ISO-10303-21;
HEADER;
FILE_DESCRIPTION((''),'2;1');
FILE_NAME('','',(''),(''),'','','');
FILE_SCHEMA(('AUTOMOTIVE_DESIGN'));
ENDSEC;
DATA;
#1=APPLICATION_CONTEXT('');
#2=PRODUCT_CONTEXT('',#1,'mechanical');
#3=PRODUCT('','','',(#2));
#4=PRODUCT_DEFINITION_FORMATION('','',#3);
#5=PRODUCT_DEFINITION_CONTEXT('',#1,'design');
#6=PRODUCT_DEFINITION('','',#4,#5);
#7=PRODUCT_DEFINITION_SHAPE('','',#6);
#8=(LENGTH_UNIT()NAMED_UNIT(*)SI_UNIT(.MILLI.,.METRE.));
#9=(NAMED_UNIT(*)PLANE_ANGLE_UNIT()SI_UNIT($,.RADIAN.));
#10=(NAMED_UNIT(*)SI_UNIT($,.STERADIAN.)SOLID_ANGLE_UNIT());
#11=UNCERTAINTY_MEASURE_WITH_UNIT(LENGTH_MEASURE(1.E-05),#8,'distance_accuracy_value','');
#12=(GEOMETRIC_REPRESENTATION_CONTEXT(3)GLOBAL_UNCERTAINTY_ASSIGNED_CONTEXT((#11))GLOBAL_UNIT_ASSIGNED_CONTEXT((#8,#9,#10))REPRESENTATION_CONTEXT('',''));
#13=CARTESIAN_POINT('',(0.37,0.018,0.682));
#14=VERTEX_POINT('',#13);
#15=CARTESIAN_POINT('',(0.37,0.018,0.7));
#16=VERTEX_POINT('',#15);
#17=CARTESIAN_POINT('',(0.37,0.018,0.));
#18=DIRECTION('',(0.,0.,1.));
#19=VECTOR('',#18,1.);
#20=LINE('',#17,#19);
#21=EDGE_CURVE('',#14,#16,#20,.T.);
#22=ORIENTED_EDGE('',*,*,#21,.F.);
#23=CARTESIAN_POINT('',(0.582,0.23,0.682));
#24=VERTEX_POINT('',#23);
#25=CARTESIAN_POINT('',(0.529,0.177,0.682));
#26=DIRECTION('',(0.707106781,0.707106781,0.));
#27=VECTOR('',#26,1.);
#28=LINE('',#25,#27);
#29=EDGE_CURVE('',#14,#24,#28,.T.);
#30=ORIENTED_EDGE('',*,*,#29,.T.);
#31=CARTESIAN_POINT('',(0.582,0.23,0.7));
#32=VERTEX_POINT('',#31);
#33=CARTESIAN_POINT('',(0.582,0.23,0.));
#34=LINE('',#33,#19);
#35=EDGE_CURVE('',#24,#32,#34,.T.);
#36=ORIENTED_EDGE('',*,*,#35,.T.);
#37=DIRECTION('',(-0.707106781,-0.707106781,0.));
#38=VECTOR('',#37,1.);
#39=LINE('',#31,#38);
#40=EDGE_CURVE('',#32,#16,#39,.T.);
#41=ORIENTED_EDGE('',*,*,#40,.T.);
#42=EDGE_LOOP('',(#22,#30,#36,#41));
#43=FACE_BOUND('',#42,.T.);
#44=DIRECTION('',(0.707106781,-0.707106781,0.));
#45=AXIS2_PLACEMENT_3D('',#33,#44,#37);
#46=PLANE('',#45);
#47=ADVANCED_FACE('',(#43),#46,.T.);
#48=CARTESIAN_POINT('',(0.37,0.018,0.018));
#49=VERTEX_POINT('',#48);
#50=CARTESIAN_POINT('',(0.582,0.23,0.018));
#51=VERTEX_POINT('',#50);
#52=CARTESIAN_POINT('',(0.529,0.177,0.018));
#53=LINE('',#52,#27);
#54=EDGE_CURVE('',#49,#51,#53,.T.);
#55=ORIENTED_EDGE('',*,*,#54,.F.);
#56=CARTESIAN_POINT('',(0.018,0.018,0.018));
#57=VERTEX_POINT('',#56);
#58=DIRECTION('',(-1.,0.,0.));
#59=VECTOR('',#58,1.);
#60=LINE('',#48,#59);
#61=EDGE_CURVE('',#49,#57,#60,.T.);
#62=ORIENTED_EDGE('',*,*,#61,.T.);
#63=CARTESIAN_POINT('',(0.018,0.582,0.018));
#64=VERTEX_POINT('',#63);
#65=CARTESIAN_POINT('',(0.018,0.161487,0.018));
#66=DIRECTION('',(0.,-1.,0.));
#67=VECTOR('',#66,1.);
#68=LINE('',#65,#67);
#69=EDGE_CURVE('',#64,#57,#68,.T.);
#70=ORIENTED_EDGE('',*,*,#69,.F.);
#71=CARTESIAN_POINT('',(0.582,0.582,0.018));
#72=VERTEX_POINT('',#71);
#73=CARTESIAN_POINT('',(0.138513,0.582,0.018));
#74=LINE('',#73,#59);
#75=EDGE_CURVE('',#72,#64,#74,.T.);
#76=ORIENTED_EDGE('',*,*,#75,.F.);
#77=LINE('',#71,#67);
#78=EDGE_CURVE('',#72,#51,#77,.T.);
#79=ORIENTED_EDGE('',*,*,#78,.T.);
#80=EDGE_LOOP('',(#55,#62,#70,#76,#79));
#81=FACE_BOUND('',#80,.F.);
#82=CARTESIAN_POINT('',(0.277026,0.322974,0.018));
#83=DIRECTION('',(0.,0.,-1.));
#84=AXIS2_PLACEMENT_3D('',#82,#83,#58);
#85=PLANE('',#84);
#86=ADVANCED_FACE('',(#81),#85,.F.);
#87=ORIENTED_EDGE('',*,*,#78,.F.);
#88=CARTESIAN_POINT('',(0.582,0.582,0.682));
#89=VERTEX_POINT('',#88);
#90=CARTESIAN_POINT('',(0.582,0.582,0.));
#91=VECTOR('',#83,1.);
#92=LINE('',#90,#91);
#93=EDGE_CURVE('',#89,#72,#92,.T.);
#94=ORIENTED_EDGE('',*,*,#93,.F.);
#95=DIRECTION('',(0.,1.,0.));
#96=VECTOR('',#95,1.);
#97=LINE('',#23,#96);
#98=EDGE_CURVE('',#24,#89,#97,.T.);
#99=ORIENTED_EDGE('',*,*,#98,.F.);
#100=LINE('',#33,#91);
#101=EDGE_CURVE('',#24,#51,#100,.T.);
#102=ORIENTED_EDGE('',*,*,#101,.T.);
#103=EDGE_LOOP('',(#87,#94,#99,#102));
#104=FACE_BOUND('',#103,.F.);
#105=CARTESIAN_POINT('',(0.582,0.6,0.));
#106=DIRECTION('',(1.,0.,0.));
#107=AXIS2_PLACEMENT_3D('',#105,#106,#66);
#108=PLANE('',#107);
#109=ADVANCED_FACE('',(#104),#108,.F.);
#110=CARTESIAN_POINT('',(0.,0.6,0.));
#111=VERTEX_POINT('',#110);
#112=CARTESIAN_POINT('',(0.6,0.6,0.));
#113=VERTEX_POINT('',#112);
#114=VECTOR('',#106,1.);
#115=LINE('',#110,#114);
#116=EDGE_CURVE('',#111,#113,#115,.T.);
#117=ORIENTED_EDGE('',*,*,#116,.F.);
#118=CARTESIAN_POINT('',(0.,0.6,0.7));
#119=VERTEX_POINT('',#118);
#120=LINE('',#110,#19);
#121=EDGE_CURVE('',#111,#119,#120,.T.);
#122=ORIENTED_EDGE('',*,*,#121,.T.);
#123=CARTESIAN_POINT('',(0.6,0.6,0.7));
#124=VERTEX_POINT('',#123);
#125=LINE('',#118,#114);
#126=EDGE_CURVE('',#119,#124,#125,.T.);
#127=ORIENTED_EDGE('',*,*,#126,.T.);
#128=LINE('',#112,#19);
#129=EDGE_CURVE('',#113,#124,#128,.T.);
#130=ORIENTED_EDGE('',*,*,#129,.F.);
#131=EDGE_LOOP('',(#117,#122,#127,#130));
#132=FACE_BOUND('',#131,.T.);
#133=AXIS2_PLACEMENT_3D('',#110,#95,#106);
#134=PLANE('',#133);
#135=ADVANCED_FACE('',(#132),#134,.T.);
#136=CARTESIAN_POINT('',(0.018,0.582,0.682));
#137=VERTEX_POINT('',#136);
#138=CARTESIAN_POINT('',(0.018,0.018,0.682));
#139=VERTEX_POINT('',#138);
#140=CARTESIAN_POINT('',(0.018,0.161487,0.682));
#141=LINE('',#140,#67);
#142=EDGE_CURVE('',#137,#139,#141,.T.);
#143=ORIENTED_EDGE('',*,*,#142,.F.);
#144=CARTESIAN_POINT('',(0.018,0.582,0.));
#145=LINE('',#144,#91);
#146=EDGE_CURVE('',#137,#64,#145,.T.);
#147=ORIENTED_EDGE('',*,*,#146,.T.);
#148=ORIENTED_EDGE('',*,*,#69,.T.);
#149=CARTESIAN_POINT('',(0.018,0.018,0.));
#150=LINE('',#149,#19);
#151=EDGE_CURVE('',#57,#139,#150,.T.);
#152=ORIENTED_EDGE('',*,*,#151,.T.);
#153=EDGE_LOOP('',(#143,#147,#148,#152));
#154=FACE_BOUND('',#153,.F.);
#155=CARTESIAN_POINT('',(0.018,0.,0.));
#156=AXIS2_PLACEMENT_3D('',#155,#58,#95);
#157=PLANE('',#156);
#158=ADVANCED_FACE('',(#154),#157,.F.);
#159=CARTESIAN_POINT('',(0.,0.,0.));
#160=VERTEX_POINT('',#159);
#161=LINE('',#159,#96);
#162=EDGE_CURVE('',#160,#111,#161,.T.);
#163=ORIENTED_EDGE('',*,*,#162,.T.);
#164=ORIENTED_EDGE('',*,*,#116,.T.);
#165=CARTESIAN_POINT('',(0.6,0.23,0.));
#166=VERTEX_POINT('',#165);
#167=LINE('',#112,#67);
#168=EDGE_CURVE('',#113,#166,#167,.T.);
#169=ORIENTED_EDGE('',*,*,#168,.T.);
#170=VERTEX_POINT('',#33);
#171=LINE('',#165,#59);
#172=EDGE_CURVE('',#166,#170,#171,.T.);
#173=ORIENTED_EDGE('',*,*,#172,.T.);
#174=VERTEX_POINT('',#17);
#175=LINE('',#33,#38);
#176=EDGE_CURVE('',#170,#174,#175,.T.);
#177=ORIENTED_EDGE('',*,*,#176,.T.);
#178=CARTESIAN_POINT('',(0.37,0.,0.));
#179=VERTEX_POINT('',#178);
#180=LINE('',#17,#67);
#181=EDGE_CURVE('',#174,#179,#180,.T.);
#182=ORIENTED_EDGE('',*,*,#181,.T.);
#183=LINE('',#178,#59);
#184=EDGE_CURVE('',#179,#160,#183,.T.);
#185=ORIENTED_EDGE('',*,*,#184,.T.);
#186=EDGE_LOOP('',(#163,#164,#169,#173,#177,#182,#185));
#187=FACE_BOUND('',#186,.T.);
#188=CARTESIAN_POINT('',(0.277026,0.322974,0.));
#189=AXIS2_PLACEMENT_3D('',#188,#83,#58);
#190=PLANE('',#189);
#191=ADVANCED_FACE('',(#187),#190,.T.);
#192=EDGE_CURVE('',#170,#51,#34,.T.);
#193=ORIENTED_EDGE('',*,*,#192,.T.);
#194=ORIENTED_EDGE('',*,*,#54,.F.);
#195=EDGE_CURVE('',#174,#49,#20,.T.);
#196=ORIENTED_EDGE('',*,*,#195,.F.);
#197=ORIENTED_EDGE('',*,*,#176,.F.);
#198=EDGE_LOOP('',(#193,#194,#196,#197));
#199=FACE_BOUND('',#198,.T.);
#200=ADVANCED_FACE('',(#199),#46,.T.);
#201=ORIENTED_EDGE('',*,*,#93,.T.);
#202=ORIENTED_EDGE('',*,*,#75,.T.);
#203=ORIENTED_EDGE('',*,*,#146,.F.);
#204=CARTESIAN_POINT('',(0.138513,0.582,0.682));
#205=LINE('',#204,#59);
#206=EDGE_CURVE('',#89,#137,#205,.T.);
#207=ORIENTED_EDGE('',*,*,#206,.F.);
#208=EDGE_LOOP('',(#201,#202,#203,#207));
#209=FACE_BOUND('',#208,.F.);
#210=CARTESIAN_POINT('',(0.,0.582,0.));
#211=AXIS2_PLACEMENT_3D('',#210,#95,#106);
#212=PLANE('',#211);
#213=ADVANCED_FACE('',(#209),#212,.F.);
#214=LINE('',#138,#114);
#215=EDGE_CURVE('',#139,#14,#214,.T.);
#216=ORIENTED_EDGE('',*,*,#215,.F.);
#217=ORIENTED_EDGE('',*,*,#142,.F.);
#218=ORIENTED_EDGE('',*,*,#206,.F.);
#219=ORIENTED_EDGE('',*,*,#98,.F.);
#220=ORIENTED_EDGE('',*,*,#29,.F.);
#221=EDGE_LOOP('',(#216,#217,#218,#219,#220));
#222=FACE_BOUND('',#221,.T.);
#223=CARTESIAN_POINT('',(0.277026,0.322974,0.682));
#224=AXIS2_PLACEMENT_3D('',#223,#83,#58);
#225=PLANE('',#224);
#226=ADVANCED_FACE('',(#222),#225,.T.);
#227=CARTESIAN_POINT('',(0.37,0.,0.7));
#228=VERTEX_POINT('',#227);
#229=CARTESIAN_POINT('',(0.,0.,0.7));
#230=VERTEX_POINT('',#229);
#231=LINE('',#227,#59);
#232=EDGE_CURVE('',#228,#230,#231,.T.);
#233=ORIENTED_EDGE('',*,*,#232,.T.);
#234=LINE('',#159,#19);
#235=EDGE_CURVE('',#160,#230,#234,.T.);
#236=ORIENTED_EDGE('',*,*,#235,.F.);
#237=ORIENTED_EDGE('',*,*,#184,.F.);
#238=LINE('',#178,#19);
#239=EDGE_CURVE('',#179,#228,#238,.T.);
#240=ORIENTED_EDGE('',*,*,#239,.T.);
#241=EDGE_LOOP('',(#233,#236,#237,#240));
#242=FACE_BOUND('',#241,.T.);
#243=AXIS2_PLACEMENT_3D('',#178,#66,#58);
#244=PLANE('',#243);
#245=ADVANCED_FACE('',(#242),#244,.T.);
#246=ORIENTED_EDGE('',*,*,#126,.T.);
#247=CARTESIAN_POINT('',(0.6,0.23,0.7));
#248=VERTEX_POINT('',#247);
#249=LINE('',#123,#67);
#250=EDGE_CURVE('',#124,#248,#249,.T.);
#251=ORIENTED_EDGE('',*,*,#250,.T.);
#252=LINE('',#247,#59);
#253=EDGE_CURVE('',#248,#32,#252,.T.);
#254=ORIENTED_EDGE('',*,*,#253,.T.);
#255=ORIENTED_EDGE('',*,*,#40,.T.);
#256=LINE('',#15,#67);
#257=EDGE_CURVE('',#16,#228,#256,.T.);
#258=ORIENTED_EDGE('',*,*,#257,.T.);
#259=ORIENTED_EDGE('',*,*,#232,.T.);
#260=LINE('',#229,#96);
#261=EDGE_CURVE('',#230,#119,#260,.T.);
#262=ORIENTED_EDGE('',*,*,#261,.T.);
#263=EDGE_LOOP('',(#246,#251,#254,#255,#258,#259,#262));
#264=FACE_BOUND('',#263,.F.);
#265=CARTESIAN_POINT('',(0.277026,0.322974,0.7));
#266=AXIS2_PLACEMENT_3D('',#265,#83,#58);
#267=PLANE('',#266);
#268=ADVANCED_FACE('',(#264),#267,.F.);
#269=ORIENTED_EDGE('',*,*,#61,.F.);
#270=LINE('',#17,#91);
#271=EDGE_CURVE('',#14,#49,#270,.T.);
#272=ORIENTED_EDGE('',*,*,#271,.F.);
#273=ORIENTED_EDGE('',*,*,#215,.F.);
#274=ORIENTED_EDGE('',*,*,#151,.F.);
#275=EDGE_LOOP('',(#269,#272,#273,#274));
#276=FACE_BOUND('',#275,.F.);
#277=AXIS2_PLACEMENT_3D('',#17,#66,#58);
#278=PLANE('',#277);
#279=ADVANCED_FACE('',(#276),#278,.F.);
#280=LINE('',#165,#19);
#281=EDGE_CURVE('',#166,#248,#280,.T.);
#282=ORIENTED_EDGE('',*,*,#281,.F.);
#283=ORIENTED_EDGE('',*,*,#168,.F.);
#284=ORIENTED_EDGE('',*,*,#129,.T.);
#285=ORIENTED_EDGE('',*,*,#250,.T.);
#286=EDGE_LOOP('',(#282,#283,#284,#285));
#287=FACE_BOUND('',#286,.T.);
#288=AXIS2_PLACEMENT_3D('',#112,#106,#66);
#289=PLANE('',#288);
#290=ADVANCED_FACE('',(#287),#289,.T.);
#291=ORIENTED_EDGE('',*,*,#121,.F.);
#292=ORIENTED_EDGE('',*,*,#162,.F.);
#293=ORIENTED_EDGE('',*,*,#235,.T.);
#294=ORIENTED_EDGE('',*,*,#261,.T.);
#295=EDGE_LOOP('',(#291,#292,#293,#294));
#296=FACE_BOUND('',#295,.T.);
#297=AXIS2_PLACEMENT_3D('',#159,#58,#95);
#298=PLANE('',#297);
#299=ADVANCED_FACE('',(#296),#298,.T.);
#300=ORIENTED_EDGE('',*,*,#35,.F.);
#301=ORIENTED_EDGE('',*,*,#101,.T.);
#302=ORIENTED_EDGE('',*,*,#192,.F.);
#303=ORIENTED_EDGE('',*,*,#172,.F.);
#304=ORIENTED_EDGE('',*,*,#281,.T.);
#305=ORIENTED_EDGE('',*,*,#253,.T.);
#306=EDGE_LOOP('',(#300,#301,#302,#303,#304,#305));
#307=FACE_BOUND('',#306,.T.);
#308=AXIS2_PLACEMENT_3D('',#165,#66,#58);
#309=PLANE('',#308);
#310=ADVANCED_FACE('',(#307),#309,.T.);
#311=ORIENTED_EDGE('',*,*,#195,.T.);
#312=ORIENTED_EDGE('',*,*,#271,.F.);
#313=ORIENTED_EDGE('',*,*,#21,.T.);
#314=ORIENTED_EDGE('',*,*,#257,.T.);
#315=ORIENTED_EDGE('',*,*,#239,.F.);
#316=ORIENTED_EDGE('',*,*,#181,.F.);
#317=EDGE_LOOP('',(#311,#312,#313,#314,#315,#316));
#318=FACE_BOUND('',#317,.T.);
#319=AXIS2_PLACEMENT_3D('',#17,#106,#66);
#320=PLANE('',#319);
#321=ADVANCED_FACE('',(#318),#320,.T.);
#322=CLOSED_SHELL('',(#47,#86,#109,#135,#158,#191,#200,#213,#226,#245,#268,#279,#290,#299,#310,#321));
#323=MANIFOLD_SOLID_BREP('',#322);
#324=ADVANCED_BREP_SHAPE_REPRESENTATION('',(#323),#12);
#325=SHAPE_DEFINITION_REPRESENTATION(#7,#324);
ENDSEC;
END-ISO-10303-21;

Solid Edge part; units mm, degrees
sketch "Sketch1" plane through (0, 0, 0) normal (0, 0, 1) x (1, 0, 0)
  line L0 (0, 0) -> (0, 0.6)
  line L1 (0, 0.6) -> (0.6, 0.6)
  line L2 (0.6, 0.6) -> (0.6, 0.23)
  line L3 (0.6, 0.23) -> (0.582, 0.23)
  line L4 (0.582, 0.23) -> (0.37, 0.018)
  line L5 (0.37, 0.018) -> (0.37, 0)
  line L6 (0.37, 0) -> (0, 0)
  dimension "D1" = 0.6
  dimension "D2" = 0.37
  dimension "D3" = 0.018
extrude "Protrusion1" add sketch "Sketch1" along normal blind 0.7
shell "Dünnwand_1" thickness 0.018 removed faces 1 at (0.5488, 0.1968, 0.5763)
